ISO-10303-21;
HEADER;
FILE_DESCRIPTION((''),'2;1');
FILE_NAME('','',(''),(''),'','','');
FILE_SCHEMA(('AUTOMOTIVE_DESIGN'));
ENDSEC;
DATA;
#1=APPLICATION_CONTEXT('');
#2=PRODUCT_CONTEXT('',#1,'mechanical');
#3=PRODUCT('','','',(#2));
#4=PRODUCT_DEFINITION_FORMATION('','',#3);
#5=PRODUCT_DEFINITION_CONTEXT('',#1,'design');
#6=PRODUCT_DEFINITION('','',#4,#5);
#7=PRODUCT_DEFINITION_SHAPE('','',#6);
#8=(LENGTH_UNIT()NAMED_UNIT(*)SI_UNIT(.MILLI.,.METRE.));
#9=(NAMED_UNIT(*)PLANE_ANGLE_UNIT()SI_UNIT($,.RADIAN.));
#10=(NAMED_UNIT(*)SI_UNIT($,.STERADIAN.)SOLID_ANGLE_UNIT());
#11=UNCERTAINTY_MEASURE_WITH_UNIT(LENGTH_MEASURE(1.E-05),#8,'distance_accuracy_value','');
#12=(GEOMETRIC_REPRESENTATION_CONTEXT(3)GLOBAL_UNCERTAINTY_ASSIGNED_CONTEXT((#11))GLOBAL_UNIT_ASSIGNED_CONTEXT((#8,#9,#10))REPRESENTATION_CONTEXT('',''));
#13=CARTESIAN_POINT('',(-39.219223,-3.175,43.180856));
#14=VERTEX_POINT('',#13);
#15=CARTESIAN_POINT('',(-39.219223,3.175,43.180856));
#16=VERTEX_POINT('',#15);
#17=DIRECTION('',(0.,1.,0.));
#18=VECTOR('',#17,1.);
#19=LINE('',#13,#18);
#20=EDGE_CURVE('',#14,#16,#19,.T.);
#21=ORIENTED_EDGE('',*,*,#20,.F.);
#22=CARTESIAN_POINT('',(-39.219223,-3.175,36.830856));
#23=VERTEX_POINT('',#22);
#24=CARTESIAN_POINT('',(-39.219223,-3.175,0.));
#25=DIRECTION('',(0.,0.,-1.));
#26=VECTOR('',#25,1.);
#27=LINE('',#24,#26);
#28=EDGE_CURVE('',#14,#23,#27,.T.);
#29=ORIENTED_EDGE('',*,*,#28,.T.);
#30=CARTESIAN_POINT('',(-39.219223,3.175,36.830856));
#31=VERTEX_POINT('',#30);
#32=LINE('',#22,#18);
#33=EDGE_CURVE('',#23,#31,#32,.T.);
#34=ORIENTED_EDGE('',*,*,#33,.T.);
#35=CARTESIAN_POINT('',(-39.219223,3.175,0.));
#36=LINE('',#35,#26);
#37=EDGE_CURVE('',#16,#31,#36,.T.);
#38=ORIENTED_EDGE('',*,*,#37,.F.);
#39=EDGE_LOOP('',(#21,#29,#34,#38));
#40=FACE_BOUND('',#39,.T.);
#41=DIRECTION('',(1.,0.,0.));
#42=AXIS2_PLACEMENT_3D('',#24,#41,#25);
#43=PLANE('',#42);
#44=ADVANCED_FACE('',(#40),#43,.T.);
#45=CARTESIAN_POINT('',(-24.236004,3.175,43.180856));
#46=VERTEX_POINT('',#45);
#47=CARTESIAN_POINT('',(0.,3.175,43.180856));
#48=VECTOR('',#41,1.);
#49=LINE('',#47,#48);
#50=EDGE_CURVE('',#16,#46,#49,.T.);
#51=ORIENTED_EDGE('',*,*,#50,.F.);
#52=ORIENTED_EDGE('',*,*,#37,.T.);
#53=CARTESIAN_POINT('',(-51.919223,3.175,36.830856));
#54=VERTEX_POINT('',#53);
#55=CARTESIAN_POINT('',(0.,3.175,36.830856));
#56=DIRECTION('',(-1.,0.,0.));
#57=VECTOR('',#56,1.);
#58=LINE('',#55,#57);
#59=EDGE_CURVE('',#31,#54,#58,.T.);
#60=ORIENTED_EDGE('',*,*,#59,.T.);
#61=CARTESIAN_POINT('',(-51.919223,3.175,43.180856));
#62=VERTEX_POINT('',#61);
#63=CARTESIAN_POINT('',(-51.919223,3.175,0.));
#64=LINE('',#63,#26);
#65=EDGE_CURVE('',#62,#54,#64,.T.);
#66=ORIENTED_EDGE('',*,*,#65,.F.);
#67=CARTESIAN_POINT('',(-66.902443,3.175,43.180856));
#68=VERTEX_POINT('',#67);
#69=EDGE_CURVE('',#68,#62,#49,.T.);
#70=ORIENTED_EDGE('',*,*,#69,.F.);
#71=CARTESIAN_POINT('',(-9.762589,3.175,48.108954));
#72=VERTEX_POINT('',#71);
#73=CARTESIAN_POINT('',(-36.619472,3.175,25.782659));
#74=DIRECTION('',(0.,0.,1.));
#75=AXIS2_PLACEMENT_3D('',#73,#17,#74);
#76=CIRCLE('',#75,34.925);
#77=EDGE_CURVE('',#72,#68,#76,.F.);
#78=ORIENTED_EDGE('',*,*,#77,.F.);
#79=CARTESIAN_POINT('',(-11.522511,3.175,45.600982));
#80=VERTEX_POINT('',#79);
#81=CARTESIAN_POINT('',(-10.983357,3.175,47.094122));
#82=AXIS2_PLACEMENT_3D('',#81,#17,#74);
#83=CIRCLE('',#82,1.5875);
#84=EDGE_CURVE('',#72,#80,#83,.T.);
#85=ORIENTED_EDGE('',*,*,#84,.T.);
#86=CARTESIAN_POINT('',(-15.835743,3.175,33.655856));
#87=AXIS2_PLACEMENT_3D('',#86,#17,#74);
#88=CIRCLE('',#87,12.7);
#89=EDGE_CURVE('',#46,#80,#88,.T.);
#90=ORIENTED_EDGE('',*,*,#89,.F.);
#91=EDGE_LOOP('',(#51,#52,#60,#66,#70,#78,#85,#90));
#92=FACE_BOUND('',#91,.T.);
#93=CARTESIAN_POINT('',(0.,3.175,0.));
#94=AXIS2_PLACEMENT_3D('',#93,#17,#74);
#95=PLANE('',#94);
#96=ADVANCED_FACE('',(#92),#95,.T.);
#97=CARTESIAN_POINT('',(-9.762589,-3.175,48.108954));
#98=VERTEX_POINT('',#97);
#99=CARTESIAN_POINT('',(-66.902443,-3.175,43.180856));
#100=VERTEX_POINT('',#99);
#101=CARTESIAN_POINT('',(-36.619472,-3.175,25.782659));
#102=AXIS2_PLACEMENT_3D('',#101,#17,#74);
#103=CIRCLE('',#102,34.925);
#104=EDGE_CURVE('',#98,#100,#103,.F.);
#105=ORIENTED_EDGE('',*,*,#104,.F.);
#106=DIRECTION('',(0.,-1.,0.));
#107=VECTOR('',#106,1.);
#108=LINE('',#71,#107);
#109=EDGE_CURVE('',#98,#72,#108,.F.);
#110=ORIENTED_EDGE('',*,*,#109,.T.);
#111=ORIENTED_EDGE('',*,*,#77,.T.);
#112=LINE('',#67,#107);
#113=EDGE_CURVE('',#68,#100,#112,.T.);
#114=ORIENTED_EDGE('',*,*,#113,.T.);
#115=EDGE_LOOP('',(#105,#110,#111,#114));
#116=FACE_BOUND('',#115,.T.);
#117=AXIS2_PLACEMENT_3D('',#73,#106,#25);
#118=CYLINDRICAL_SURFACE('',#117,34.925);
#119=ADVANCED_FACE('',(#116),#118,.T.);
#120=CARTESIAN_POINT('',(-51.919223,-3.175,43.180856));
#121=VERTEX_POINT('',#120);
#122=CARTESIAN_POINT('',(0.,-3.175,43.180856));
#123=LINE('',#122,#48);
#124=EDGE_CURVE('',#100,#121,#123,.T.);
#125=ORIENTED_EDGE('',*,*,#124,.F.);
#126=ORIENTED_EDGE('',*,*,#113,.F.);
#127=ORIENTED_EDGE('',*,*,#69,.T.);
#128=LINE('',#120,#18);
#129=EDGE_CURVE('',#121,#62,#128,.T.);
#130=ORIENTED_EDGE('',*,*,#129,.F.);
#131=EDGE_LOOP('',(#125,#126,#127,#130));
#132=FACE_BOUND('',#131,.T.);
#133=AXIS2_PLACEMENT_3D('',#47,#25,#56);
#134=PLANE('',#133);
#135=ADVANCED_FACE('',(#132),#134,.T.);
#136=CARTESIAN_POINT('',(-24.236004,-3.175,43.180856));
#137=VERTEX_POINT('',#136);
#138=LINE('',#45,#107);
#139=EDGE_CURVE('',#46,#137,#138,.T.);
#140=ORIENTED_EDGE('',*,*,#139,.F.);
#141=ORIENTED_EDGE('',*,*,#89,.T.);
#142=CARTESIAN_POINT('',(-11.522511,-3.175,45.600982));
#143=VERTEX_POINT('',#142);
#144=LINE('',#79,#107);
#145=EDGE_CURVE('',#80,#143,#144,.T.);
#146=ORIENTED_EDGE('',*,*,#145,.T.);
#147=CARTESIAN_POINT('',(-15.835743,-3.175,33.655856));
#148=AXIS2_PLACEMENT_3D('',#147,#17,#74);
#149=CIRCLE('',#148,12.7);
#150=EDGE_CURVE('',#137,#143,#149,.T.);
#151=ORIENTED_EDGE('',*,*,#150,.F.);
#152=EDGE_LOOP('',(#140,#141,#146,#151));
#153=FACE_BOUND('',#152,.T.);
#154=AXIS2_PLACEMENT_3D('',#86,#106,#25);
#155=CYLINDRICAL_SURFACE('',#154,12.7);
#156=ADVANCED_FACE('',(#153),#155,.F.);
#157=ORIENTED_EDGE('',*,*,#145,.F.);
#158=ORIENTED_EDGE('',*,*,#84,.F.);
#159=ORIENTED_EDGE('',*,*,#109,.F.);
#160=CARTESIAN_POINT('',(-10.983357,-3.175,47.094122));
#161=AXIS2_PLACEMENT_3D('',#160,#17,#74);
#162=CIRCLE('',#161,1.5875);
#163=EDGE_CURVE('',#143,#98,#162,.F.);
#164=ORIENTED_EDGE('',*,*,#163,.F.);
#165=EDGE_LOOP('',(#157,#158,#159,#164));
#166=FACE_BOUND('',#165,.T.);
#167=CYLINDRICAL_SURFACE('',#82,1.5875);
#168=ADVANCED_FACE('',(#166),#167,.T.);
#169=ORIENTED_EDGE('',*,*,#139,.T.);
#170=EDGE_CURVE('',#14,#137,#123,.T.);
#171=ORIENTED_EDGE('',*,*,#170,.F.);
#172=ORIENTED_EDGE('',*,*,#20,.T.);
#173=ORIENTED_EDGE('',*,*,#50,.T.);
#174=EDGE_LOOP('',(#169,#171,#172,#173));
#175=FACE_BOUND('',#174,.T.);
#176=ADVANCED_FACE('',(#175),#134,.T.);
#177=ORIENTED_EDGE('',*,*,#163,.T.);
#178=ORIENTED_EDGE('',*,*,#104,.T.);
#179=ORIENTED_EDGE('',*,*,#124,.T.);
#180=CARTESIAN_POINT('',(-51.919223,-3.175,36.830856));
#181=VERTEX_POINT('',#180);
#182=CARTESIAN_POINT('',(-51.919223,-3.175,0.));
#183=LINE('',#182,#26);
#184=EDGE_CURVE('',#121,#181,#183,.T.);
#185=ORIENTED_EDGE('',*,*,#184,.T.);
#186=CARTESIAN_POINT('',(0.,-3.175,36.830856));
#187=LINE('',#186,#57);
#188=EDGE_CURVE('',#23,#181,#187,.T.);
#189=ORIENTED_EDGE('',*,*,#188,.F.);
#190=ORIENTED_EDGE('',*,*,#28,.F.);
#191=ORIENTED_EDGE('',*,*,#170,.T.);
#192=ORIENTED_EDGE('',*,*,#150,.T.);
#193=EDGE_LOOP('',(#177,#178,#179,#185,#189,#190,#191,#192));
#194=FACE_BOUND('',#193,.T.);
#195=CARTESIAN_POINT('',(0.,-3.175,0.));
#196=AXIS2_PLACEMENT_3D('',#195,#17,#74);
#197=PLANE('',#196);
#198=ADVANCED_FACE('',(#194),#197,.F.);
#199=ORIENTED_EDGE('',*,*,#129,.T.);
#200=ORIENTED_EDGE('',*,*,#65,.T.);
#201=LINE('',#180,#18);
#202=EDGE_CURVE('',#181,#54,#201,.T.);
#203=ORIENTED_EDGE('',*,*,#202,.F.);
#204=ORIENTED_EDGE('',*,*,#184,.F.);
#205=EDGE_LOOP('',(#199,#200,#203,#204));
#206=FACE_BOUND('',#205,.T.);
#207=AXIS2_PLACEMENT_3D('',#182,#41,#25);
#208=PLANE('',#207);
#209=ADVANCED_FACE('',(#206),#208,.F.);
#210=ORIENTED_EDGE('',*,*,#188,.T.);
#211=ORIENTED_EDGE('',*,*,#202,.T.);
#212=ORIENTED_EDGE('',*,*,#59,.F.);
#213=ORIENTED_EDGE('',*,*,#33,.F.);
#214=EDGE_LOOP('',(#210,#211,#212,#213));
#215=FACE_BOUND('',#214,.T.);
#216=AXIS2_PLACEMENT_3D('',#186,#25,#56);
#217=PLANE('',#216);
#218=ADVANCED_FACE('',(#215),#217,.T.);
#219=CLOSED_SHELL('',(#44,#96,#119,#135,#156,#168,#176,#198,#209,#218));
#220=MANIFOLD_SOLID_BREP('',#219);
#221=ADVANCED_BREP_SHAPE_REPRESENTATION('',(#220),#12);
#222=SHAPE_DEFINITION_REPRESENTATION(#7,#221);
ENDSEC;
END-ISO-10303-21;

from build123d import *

# Parameters (mm, degrees)
BOSS_EXTRUDE1_DEPTH = 3.175
FILLET1_START       = -4
FILLET1_DEPTH       = 8
SKETCH2_W           = 12.7
SKETCH2_H           = 6.35
BOSS_EXTRUDE2_DEPTH = 6.35


with BuildPart() as part:
    # Sketch1 → Boss-Extrude1 (new, symmetric)
    with BuildSketch(Plane(origin=(0, 0, 0), x_dir=(1, 0, 0), z_dir=(0, 1, 0))):
        with BuildLine():
            Line((-54.202443258, -43.180856192), (-66.902443258, -43.180856192))
            ThreePointArc((-66.902443258, -43.180856192), (-33.83954697, -60.596845897), (-3.959326756, -38.154826194))
            ThreePointArc((-3.959326756, -38.154826194), (-12.780230261, -45.982812034), (-24.23600367, -43.180856192))
            Line((-24.23600367, -43.180856192), (-41.502443258, -43.180856192))
            Line((-41.502443258, -43.180856192), (-54.202443258, -43.180856192))
        make_face()
    extrude(amount=BOSS_EXTRUDE1_DEPTH, both=True)

    # Fillet1: read off the stored shape, not the designer's step
    # Fillet1 outline → Fillet1 (cut)
    with BuildSketch(Plane(origin=(0, 0, 0), x_dir=(1, 0, 0), z_dir=(0, 1, 0)).offset(FILLET1_START)):
        with BuildLine():
            ThreePointArc((-11.522510786, -45.600981794), (-9.683883576, -46.182242141), (-9.76258933, -48.108954111))
            ThreePointArc((-9.76258933, -48.108954111), (-6.447625568, -43.372863288), (-3.959326789, -38.15482628))
            ThreePointArc((-3.959326789, -38.15482628), (-6.925777422, -42.705856679), (-11.522510786, -45.600981794))
        make_face()
    extrude(amount=FILLET1_DEPTH, mode=Mode.SUBTRACT)

    # Sketch2 → Boss-Extrude2 (add)
    with BuildSketch(Plane(origin=(0, 3.175, 0), x_dir=(1, 0, 0), z_dir=(0, 1, 0))):
        with Locations((-45.569223464, -40.005856192)):
            Rectangle(SKETCH2_W, SKETCH2_H)
    extrude(amount=-BOSS_EXTRUDE2_DEPTH)


solid = part.part
